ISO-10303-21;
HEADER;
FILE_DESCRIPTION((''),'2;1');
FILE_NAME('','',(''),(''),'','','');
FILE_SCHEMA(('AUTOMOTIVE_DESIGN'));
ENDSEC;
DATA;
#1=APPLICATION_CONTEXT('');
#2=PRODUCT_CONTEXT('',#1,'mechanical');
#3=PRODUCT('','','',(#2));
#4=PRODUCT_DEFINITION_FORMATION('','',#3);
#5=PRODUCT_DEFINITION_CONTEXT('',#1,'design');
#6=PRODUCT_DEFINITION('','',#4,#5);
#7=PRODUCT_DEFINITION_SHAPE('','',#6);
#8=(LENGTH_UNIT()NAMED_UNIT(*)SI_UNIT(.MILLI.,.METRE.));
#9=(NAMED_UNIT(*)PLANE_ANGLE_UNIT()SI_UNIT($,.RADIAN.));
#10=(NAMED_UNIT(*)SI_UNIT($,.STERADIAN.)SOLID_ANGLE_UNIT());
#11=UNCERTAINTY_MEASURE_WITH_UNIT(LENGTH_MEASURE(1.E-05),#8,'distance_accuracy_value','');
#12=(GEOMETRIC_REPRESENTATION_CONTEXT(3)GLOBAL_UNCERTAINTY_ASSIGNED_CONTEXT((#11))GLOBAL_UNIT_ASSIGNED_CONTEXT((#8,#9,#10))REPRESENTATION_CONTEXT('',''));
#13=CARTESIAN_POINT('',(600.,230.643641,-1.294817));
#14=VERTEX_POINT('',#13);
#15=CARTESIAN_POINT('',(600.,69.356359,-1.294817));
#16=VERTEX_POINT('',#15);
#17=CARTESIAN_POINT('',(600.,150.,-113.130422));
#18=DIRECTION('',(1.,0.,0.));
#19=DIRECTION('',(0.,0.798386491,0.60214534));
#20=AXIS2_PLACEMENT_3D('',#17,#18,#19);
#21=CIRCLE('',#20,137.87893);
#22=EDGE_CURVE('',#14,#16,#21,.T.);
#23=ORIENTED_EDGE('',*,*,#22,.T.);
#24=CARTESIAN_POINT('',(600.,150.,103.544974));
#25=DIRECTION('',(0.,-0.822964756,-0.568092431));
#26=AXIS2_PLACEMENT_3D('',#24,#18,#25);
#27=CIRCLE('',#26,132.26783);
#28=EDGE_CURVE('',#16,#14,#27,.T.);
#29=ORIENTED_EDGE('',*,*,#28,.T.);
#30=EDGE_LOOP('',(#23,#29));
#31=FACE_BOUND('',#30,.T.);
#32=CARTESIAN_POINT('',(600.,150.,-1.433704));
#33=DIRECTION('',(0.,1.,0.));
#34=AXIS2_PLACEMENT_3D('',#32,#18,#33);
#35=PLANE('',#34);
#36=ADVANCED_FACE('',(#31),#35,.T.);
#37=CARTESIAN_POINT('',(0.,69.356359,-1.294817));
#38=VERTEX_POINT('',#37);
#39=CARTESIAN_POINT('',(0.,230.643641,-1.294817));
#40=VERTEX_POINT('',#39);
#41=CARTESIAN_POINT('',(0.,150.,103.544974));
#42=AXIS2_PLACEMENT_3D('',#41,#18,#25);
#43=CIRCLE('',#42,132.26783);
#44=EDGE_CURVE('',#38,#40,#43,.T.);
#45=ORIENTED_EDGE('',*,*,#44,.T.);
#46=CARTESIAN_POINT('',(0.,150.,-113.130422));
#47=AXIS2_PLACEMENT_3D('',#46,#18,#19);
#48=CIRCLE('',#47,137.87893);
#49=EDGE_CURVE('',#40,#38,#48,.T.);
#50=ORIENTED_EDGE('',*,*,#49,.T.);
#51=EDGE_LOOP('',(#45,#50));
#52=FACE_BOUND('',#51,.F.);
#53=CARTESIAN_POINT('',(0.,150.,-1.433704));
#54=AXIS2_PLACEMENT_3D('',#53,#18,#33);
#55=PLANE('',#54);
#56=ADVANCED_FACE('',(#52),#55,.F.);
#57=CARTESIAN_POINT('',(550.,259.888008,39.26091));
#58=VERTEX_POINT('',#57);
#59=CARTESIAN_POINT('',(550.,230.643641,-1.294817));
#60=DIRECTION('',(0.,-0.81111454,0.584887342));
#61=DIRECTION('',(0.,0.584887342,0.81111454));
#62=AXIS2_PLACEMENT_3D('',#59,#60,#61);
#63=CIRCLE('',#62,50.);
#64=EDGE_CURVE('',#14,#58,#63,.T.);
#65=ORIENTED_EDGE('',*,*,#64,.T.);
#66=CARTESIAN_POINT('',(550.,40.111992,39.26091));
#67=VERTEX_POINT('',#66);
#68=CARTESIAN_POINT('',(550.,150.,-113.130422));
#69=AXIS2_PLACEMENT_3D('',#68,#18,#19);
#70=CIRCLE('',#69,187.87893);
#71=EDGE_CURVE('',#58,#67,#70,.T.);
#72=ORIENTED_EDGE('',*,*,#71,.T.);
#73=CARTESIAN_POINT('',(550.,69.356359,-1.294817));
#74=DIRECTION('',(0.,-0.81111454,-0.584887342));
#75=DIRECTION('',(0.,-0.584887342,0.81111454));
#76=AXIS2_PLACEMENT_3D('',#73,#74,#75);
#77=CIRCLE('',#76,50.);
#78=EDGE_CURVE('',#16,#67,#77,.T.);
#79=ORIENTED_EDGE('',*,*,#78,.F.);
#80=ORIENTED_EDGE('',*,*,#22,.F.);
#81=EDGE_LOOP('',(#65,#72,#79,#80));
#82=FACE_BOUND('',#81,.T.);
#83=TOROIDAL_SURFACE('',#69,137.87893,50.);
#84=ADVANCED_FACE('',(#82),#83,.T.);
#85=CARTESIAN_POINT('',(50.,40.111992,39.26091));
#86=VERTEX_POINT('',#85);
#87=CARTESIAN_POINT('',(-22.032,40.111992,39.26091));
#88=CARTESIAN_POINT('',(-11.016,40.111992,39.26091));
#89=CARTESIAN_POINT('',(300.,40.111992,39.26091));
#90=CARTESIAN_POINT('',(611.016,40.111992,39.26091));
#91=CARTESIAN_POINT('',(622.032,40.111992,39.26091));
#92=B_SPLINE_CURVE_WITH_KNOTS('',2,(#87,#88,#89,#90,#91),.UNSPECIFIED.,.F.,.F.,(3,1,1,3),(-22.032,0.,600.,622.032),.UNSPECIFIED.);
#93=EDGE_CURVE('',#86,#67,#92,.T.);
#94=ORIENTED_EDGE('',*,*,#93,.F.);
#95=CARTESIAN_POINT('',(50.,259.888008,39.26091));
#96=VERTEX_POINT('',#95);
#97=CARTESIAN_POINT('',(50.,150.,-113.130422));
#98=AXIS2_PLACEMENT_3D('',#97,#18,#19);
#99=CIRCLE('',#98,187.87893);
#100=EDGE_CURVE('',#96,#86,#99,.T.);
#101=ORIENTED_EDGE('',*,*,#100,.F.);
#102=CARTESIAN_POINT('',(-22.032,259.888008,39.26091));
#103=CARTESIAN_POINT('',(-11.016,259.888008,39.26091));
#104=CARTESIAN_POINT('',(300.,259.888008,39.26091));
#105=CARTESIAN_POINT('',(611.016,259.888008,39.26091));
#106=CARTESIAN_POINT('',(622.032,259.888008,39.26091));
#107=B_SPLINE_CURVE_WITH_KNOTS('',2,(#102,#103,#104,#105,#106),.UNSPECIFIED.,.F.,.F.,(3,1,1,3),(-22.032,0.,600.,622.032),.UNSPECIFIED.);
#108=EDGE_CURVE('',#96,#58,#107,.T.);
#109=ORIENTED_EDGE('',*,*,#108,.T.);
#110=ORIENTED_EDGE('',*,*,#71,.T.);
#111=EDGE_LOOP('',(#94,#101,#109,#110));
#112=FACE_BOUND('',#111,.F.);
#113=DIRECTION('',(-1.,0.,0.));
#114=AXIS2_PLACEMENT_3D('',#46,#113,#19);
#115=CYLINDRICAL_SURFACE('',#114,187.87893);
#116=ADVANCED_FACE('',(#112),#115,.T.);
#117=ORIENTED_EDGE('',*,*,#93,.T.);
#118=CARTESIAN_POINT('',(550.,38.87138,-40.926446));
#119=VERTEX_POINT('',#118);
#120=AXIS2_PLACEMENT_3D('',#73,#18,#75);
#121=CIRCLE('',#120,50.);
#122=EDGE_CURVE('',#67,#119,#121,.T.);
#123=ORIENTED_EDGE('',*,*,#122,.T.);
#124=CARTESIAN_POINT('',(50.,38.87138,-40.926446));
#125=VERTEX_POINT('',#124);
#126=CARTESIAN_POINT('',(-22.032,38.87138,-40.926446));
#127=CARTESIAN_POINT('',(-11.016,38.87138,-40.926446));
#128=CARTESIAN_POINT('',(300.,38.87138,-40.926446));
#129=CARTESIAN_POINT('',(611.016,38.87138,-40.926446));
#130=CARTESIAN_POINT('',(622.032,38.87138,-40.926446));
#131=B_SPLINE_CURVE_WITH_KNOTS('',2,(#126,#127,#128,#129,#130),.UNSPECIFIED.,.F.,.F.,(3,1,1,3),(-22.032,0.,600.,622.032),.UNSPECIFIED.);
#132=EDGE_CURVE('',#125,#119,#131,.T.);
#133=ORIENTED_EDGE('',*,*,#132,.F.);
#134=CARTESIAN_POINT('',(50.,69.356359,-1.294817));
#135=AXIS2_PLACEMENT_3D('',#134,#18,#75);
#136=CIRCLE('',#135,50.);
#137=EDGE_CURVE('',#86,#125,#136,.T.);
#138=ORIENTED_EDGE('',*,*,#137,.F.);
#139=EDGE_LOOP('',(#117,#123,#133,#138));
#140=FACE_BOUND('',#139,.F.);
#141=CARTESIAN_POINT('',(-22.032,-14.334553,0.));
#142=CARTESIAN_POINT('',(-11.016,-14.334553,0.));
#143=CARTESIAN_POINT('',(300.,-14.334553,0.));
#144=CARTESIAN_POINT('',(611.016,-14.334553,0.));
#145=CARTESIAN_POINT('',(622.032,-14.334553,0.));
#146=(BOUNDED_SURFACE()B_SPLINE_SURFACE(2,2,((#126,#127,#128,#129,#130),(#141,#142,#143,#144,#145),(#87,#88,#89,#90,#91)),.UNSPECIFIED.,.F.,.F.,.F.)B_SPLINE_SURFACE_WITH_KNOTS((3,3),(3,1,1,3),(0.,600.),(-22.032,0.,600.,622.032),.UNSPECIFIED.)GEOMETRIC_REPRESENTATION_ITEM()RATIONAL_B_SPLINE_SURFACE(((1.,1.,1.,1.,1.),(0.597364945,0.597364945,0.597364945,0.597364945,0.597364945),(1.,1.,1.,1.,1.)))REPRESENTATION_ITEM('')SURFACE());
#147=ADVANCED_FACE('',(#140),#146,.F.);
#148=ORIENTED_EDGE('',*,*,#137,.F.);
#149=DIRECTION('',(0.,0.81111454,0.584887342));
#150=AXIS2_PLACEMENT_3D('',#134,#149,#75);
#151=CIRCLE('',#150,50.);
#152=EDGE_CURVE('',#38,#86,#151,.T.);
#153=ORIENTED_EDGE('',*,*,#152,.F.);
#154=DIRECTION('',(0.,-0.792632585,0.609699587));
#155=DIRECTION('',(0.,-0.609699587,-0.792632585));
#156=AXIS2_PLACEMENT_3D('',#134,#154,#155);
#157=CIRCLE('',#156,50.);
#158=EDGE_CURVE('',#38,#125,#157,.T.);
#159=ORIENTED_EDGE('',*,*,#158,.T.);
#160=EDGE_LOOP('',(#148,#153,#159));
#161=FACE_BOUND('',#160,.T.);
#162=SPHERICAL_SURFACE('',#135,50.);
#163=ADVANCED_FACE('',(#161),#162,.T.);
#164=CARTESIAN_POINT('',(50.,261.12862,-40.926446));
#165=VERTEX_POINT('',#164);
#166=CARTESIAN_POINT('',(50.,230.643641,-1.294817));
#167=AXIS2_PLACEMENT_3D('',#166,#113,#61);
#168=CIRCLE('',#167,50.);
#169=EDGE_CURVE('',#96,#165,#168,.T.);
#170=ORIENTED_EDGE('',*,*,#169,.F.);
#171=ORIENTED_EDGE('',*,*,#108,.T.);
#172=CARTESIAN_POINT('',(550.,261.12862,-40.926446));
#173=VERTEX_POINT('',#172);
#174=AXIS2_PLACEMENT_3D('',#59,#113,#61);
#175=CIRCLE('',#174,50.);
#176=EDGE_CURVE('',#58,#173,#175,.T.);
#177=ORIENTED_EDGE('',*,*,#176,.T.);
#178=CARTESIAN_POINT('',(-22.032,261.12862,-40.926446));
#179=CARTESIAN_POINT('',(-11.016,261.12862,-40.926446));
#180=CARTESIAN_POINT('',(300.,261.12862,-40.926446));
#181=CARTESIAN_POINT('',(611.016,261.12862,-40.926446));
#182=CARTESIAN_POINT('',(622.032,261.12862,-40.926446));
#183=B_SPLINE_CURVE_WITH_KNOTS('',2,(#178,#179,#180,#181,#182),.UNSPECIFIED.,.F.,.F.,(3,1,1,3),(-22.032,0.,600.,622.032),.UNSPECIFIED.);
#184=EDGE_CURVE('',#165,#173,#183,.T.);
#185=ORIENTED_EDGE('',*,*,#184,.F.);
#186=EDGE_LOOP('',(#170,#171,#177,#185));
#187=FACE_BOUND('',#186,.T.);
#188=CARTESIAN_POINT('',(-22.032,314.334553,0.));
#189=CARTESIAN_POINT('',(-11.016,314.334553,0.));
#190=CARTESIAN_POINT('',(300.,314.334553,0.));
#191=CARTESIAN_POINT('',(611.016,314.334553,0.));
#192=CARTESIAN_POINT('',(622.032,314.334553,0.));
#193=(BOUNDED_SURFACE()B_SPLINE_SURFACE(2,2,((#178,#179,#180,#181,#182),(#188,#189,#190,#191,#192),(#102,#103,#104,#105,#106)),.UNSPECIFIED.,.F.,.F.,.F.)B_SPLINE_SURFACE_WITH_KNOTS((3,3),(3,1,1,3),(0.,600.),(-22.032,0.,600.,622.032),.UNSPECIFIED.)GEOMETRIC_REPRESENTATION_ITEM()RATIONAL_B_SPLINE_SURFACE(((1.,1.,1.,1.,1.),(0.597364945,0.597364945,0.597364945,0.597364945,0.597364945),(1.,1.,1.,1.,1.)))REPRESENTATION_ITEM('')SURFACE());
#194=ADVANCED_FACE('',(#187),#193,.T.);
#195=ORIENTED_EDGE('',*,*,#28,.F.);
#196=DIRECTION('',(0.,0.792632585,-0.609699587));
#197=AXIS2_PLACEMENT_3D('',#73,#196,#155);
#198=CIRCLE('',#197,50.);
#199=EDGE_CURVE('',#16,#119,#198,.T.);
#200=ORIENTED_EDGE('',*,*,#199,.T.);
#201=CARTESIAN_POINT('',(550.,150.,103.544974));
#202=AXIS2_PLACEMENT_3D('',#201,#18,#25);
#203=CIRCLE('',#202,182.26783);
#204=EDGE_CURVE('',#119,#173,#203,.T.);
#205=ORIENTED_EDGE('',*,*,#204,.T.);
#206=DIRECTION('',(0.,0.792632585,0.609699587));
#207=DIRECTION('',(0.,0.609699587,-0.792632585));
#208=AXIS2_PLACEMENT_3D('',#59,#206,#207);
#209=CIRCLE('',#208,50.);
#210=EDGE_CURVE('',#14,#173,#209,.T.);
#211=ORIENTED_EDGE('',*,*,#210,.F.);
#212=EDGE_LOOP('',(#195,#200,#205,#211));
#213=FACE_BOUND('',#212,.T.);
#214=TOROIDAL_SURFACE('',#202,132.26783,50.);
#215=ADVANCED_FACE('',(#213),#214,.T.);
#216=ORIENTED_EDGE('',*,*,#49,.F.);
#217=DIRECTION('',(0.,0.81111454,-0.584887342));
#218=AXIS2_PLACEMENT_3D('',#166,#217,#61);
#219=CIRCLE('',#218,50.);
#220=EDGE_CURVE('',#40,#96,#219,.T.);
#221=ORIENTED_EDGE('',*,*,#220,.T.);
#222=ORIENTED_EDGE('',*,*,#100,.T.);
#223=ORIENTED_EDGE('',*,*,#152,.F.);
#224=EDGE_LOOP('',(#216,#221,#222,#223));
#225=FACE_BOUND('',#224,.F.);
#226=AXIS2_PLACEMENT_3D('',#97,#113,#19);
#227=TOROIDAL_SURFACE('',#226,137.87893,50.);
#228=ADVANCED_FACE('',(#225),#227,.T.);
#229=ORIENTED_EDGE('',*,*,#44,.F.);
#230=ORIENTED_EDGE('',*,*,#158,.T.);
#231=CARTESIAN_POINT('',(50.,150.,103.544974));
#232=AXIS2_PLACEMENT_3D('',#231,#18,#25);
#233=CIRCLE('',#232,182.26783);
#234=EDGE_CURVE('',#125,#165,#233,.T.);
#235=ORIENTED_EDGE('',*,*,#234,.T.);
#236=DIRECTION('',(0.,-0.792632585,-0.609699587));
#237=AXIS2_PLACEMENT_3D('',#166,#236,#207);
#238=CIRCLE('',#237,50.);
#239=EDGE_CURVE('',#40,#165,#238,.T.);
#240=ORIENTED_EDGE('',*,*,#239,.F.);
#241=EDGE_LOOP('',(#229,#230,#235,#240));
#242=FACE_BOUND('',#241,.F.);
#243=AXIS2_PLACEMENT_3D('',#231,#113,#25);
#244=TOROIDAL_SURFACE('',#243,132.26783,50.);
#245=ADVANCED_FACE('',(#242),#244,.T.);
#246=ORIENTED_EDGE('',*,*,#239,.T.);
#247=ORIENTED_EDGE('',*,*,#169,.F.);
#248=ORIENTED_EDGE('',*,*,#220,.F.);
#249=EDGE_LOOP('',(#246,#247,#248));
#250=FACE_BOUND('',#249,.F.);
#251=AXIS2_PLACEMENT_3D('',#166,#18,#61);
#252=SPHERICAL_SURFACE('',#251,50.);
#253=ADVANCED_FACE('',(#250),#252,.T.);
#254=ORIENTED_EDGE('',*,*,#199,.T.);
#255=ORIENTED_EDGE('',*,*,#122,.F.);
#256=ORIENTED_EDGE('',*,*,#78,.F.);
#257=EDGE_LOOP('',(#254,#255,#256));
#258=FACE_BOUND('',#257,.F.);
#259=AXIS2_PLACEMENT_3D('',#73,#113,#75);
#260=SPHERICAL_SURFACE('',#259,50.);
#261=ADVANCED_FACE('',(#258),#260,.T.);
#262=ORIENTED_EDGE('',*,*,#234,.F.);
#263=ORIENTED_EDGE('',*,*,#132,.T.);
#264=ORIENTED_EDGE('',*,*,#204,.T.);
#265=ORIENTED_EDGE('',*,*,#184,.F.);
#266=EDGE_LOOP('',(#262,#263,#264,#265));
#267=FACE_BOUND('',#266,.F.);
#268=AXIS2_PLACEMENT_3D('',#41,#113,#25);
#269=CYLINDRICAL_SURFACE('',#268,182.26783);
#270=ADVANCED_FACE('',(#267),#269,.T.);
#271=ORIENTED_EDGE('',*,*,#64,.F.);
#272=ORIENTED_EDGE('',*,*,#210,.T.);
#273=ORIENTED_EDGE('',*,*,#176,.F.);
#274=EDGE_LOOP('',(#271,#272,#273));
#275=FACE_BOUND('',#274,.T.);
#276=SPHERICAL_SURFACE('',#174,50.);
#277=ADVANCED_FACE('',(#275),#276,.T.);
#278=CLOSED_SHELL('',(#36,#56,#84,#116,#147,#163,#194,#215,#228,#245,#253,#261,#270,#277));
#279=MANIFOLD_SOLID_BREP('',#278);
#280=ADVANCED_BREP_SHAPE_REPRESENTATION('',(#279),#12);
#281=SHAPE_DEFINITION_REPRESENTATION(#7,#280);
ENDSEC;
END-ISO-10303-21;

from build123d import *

# Parameters (mm, degrees)
F1_DEPTH = 600
F3_R     = 50


# Not quite as in the source:
# - a feature of the source that left no trace in its solid (it failed there, or was rolled back) is left out


with BuildPart() as f1:
    # F0 (on Right) → F1 (new body)
    with BuildSketch(Plane.YZ):
        with BuildLine():
            ThreePointArc((0, 0), (150, -78.7228552032), (300, 0))
            ThreePointArc((300, 0), (150, 74.7485079271), (0, 0))
        make_face()
    extrude(amount=F1_DEPTH)

    # F3
    f3_edges = [f1.edges().sort_by_distance(p)[0] for p in [
        (600, 150, 74.748508),
        (600, 150, -78.722855),
        (0, 150, 74.748508),
        (0, 150, -78.722855),
        (300, 300, 0),
        (300, 0, 0),
    ]]
    fillet(f3_edges, radius=F3_R)


solid = f1.part
